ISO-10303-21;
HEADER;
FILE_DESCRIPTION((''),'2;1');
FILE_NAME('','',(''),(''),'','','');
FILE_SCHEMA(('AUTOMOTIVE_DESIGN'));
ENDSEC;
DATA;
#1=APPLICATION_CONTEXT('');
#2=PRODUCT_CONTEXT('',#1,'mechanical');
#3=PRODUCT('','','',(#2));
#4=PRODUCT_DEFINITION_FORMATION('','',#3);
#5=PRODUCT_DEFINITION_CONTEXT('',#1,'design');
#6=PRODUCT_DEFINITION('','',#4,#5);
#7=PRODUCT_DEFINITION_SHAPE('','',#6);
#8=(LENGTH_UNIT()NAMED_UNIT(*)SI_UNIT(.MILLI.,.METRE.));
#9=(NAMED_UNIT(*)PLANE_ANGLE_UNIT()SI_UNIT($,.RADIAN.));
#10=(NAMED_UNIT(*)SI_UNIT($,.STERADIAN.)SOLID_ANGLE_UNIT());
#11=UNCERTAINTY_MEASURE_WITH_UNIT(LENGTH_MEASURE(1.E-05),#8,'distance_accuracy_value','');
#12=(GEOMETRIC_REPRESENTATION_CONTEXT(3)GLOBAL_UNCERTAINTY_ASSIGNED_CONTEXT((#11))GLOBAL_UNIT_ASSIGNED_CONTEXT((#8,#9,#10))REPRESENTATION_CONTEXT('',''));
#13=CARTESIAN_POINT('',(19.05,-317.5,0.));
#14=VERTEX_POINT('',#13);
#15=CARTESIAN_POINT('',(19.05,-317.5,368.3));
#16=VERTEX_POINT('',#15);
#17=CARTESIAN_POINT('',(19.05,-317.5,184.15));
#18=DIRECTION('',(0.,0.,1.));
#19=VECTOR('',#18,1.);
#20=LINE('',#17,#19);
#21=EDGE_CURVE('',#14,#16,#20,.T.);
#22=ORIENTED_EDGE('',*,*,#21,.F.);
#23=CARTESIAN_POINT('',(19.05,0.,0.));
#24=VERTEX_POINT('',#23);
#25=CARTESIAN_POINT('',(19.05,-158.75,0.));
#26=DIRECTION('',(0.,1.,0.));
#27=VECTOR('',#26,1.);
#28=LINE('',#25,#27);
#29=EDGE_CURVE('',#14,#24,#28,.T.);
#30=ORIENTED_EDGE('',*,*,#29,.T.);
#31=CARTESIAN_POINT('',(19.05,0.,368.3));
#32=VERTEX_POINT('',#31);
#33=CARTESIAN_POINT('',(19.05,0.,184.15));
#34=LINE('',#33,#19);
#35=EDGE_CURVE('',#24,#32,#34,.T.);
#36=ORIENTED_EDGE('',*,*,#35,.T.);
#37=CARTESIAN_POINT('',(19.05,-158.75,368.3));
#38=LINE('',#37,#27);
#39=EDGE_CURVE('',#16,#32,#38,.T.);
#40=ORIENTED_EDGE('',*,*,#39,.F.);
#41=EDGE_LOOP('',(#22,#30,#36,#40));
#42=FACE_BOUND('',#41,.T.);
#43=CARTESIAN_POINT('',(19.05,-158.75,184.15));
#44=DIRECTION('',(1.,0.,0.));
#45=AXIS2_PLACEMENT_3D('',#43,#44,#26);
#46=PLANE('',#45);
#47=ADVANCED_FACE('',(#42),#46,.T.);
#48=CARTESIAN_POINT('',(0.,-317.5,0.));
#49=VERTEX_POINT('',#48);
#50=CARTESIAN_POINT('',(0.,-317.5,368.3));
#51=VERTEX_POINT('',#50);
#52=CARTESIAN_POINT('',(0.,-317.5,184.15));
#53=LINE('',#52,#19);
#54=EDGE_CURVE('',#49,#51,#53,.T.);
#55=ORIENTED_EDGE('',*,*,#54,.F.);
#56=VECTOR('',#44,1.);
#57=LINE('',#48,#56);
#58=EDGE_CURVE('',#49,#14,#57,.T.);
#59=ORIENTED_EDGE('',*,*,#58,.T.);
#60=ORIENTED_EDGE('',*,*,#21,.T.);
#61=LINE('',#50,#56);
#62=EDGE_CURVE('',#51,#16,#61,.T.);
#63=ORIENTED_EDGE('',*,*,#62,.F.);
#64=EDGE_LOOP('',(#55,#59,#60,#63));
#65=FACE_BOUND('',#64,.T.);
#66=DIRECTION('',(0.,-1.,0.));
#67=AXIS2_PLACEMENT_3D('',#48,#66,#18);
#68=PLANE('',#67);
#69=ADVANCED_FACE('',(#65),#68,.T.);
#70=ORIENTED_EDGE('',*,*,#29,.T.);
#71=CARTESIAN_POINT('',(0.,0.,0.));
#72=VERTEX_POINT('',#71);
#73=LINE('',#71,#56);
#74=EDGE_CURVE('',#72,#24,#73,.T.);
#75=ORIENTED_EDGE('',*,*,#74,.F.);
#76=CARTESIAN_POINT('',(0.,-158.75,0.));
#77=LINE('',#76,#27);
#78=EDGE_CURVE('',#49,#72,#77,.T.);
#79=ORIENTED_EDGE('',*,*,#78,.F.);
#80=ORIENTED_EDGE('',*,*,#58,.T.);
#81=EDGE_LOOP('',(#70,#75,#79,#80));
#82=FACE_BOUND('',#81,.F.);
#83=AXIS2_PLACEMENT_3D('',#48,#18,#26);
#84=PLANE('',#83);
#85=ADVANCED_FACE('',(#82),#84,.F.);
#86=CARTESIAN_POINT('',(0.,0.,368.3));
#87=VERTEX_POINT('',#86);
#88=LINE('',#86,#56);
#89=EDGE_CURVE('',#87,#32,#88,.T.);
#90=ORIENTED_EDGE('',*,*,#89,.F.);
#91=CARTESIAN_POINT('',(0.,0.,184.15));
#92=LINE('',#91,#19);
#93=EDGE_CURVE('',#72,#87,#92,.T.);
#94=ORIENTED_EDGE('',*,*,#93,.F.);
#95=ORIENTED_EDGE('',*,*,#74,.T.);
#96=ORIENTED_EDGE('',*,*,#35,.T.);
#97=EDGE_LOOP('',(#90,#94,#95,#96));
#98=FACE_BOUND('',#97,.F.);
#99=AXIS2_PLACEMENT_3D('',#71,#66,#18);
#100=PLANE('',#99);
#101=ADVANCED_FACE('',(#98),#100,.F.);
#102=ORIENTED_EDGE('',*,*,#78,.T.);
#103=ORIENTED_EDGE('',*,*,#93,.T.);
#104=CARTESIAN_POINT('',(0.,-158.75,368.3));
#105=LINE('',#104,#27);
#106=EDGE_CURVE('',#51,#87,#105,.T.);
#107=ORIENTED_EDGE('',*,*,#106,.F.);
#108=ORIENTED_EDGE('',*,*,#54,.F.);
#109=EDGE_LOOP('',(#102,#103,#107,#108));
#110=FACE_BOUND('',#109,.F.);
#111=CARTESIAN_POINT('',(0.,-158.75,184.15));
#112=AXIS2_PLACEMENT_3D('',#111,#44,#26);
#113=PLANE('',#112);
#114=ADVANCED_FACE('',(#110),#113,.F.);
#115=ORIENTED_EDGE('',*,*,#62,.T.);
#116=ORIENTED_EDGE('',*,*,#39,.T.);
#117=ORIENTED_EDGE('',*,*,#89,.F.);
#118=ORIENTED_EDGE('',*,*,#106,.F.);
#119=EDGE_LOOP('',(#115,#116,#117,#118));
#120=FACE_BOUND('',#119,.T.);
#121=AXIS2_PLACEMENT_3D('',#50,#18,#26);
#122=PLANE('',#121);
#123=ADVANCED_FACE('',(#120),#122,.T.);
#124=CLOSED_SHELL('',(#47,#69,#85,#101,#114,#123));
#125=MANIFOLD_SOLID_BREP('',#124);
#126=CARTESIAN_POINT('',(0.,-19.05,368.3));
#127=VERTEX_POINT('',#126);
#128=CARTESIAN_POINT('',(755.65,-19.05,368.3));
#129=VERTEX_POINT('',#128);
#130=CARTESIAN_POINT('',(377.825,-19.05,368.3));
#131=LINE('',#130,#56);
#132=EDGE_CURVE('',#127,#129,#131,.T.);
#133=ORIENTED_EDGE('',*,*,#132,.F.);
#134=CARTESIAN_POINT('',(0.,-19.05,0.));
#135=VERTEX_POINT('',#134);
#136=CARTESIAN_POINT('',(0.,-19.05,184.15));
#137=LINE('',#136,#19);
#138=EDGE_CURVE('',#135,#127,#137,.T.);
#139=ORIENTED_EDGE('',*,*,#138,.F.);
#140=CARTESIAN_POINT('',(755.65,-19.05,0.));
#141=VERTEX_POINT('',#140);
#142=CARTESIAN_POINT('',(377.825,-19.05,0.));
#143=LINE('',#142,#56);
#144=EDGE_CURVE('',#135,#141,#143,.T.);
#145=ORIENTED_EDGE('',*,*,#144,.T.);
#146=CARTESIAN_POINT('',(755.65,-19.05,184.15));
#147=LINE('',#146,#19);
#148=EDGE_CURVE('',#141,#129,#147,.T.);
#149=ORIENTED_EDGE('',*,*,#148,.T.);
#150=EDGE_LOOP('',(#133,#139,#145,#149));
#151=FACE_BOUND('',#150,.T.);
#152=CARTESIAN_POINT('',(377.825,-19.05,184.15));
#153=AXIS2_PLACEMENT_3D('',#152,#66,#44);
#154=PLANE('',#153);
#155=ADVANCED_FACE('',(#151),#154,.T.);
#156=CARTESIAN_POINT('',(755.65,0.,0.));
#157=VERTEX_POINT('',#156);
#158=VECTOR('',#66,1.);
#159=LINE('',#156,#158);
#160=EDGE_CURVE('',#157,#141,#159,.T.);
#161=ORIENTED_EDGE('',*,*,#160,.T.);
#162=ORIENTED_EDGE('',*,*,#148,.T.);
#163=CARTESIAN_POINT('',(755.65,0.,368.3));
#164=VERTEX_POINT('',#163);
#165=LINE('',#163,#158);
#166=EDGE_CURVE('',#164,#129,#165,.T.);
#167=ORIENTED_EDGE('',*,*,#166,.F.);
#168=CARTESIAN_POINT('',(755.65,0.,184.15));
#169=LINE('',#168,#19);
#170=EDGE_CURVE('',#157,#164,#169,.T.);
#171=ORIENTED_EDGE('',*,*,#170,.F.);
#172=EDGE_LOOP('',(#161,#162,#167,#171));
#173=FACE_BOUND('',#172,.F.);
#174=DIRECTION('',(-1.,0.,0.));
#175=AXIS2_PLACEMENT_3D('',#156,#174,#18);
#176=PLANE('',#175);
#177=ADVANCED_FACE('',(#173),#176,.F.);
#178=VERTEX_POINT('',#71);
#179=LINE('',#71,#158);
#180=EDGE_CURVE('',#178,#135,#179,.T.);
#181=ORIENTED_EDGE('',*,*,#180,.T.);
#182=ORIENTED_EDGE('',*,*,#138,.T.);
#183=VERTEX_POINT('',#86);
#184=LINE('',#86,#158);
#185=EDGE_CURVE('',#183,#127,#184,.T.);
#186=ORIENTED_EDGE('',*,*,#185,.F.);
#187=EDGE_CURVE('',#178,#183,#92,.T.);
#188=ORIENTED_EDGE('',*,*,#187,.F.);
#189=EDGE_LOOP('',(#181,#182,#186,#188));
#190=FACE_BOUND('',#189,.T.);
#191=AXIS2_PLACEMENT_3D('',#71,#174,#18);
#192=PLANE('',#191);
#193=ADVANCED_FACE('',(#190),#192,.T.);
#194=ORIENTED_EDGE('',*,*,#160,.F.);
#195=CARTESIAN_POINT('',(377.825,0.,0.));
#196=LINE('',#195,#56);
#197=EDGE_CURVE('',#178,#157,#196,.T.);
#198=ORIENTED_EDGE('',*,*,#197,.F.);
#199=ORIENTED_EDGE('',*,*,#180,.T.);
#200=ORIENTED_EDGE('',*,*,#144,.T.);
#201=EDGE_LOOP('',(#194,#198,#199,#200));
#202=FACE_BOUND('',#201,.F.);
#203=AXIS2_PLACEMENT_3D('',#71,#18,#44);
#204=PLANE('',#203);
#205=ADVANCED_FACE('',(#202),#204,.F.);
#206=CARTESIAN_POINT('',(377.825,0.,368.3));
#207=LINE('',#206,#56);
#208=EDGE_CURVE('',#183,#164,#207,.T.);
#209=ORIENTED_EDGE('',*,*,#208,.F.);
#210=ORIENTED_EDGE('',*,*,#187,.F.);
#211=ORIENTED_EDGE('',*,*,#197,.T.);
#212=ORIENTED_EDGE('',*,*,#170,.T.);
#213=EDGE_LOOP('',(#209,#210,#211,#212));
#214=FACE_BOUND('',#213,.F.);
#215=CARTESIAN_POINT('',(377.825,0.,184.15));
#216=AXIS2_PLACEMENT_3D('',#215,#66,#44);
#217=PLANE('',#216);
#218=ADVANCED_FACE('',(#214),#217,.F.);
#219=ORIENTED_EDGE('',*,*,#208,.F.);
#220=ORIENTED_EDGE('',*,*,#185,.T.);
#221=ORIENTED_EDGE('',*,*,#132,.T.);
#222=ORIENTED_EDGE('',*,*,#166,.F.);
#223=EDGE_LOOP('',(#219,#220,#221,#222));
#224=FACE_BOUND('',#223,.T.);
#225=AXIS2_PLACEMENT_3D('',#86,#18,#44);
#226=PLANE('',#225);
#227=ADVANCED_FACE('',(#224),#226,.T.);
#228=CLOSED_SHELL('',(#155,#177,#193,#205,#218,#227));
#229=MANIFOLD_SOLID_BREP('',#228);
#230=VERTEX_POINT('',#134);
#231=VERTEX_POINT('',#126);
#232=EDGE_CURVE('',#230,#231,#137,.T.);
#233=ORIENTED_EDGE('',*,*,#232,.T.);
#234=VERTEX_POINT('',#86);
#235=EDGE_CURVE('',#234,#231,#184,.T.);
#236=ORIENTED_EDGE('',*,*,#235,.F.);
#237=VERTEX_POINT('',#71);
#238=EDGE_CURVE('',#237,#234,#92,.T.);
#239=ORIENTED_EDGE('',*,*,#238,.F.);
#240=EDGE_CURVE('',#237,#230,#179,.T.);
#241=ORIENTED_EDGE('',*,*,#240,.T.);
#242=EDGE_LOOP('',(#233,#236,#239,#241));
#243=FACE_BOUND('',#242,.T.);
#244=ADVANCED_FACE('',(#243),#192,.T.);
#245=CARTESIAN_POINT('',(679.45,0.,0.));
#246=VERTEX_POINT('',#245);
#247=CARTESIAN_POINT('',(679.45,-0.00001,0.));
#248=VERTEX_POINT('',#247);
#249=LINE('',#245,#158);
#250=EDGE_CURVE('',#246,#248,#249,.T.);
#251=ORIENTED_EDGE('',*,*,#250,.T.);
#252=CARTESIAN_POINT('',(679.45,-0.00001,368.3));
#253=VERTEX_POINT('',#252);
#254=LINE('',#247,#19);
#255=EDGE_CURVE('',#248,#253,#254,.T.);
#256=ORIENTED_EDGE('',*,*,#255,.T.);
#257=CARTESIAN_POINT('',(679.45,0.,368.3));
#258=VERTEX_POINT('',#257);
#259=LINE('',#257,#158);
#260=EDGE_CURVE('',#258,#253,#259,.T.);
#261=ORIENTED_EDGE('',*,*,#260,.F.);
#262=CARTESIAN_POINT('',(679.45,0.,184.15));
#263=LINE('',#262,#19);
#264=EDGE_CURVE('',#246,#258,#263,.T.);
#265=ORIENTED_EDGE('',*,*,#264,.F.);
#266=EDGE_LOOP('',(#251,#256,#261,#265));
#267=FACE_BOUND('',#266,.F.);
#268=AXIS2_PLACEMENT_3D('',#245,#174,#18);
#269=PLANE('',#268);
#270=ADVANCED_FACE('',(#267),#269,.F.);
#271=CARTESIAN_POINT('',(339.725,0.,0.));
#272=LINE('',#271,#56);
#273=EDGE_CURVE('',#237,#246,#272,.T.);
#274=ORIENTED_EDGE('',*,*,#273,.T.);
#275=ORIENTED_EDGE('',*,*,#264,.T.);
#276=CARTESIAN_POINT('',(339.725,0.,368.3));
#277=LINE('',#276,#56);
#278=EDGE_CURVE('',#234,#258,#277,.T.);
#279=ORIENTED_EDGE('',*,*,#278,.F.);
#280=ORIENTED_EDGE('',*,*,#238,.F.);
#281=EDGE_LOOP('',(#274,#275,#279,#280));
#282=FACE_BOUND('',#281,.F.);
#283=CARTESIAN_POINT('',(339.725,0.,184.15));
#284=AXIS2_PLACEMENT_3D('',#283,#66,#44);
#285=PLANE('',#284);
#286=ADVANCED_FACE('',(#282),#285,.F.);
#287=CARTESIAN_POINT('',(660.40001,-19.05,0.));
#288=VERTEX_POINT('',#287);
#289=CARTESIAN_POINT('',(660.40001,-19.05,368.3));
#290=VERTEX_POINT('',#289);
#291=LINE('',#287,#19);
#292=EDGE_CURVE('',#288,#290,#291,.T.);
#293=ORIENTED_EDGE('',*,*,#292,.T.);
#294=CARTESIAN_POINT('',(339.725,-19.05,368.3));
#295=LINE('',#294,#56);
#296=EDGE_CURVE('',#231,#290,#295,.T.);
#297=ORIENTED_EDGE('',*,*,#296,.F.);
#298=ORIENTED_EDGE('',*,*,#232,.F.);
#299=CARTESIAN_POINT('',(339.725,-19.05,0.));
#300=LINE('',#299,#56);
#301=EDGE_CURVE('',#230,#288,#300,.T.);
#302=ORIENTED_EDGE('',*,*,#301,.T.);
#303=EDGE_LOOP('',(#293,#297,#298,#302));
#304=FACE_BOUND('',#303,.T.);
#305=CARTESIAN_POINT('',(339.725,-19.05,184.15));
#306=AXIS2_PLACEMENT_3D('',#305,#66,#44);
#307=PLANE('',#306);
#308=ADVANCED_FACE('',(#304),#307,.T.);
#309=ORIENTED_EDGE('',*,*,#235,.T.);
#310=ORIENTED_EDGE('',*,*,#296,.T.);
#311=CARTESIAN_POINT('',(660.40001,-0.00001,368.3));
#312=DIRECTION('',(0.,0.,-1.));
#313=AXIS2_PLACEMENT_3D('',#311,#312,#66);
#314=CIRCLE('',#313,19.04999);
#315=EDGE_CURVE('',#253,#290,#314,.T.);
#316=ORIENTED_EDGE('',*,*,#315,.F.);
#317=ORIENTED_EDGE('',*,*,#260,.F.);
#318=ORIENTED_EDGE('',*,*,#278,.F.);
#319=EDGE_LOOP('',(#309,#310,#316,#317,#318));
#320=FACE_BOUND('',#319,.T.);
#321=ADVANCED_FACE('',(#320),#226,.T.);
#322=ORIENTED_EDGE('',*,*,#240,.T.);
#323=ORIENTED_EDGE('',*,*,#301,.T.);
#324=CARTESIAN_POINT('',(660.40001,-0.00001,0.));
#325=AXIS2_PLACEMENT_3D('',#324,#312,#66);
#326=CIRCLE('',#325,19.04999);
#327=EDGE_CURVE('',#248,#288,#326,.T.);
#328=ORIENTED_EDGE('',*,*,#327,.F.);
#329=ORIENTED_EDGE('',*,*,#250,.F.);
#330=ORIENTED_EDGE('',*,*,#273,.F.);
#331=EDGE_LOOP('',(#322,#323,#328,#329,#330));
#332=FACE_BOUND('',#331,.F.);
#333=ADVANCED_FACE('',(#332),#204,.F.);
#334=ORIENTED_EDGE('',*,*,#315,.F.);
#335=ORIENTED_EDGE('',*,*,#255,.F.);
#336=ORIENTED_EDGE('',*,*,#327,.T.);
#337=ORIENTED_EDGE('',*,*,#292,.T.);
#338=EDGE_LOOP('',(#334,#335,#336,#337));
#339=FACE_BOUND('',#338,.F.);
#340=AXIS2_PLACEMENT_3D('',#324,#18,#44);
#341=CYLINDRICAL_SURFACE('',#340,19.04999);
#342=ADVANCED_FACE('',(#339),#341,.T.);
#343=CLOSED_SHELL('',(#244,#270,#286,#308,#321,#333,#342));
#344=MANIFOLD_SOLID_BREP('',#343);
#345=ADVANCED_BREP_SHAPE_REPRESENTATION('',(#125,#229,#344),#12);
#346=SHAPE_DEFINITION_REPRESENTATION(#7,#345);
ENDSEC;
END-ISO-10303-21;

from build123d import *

# Parameters (mm, degrees)
F0_W     = 755.65
F0_H     = 368.3
F1_DEPTH = 19.05
F2_W     = 679.45
F2_H     = 368.3
F3_DEPTH = 19.05
F4_R     = 19.04999
F5_W     = 317.5
F5_H     = 368.3
F6_DEPTH = 19.05


# Not quite as in the source:
# - a fillet or chamfer is up to 0.001 mm smaller than in the source, because OpenCascade refuses the exact size


with BuildPart() as f1:
    # F0 (on Front) → F1 (new body)
    with BuildSketch(Plane.XZ):
        with Locations((377.825, 184.15)):
            Rectangle(F0_W, F0_H)
    extrude(amount=F1_DEPTH)


with BuildPart() as f3:
    # F2 (on Front) → F3 (new body)
    with BuildSketch(Plane.XZ):
        with Locations((339.725, 184.15)):
            Rectangle(F2_W, F2_H)
    extrude(amount=F3_DEPTH)

    # F4 (radius 19.05 in the source; OpenCascade refuses exactly that, so slightly less here)
    f4_edges = [f3.edges().sort_by_distance(p)[0] for p in [
        (679.45, -19.05, 184.15),
    ]]
    fillet(f4_edges, radius=F4_R)


with BuildPart() as f6:
    # F5 (on Right) → F6 (new body)
    with BuildSketch(Plane.YZ):
        with Locations((-158.75, 184.15)):
            Rectangle(F5_W, F5_H)
    extrude(amount=F6_DEPTH)


solid = Compound([f1.part, f3.part, f6.part])
